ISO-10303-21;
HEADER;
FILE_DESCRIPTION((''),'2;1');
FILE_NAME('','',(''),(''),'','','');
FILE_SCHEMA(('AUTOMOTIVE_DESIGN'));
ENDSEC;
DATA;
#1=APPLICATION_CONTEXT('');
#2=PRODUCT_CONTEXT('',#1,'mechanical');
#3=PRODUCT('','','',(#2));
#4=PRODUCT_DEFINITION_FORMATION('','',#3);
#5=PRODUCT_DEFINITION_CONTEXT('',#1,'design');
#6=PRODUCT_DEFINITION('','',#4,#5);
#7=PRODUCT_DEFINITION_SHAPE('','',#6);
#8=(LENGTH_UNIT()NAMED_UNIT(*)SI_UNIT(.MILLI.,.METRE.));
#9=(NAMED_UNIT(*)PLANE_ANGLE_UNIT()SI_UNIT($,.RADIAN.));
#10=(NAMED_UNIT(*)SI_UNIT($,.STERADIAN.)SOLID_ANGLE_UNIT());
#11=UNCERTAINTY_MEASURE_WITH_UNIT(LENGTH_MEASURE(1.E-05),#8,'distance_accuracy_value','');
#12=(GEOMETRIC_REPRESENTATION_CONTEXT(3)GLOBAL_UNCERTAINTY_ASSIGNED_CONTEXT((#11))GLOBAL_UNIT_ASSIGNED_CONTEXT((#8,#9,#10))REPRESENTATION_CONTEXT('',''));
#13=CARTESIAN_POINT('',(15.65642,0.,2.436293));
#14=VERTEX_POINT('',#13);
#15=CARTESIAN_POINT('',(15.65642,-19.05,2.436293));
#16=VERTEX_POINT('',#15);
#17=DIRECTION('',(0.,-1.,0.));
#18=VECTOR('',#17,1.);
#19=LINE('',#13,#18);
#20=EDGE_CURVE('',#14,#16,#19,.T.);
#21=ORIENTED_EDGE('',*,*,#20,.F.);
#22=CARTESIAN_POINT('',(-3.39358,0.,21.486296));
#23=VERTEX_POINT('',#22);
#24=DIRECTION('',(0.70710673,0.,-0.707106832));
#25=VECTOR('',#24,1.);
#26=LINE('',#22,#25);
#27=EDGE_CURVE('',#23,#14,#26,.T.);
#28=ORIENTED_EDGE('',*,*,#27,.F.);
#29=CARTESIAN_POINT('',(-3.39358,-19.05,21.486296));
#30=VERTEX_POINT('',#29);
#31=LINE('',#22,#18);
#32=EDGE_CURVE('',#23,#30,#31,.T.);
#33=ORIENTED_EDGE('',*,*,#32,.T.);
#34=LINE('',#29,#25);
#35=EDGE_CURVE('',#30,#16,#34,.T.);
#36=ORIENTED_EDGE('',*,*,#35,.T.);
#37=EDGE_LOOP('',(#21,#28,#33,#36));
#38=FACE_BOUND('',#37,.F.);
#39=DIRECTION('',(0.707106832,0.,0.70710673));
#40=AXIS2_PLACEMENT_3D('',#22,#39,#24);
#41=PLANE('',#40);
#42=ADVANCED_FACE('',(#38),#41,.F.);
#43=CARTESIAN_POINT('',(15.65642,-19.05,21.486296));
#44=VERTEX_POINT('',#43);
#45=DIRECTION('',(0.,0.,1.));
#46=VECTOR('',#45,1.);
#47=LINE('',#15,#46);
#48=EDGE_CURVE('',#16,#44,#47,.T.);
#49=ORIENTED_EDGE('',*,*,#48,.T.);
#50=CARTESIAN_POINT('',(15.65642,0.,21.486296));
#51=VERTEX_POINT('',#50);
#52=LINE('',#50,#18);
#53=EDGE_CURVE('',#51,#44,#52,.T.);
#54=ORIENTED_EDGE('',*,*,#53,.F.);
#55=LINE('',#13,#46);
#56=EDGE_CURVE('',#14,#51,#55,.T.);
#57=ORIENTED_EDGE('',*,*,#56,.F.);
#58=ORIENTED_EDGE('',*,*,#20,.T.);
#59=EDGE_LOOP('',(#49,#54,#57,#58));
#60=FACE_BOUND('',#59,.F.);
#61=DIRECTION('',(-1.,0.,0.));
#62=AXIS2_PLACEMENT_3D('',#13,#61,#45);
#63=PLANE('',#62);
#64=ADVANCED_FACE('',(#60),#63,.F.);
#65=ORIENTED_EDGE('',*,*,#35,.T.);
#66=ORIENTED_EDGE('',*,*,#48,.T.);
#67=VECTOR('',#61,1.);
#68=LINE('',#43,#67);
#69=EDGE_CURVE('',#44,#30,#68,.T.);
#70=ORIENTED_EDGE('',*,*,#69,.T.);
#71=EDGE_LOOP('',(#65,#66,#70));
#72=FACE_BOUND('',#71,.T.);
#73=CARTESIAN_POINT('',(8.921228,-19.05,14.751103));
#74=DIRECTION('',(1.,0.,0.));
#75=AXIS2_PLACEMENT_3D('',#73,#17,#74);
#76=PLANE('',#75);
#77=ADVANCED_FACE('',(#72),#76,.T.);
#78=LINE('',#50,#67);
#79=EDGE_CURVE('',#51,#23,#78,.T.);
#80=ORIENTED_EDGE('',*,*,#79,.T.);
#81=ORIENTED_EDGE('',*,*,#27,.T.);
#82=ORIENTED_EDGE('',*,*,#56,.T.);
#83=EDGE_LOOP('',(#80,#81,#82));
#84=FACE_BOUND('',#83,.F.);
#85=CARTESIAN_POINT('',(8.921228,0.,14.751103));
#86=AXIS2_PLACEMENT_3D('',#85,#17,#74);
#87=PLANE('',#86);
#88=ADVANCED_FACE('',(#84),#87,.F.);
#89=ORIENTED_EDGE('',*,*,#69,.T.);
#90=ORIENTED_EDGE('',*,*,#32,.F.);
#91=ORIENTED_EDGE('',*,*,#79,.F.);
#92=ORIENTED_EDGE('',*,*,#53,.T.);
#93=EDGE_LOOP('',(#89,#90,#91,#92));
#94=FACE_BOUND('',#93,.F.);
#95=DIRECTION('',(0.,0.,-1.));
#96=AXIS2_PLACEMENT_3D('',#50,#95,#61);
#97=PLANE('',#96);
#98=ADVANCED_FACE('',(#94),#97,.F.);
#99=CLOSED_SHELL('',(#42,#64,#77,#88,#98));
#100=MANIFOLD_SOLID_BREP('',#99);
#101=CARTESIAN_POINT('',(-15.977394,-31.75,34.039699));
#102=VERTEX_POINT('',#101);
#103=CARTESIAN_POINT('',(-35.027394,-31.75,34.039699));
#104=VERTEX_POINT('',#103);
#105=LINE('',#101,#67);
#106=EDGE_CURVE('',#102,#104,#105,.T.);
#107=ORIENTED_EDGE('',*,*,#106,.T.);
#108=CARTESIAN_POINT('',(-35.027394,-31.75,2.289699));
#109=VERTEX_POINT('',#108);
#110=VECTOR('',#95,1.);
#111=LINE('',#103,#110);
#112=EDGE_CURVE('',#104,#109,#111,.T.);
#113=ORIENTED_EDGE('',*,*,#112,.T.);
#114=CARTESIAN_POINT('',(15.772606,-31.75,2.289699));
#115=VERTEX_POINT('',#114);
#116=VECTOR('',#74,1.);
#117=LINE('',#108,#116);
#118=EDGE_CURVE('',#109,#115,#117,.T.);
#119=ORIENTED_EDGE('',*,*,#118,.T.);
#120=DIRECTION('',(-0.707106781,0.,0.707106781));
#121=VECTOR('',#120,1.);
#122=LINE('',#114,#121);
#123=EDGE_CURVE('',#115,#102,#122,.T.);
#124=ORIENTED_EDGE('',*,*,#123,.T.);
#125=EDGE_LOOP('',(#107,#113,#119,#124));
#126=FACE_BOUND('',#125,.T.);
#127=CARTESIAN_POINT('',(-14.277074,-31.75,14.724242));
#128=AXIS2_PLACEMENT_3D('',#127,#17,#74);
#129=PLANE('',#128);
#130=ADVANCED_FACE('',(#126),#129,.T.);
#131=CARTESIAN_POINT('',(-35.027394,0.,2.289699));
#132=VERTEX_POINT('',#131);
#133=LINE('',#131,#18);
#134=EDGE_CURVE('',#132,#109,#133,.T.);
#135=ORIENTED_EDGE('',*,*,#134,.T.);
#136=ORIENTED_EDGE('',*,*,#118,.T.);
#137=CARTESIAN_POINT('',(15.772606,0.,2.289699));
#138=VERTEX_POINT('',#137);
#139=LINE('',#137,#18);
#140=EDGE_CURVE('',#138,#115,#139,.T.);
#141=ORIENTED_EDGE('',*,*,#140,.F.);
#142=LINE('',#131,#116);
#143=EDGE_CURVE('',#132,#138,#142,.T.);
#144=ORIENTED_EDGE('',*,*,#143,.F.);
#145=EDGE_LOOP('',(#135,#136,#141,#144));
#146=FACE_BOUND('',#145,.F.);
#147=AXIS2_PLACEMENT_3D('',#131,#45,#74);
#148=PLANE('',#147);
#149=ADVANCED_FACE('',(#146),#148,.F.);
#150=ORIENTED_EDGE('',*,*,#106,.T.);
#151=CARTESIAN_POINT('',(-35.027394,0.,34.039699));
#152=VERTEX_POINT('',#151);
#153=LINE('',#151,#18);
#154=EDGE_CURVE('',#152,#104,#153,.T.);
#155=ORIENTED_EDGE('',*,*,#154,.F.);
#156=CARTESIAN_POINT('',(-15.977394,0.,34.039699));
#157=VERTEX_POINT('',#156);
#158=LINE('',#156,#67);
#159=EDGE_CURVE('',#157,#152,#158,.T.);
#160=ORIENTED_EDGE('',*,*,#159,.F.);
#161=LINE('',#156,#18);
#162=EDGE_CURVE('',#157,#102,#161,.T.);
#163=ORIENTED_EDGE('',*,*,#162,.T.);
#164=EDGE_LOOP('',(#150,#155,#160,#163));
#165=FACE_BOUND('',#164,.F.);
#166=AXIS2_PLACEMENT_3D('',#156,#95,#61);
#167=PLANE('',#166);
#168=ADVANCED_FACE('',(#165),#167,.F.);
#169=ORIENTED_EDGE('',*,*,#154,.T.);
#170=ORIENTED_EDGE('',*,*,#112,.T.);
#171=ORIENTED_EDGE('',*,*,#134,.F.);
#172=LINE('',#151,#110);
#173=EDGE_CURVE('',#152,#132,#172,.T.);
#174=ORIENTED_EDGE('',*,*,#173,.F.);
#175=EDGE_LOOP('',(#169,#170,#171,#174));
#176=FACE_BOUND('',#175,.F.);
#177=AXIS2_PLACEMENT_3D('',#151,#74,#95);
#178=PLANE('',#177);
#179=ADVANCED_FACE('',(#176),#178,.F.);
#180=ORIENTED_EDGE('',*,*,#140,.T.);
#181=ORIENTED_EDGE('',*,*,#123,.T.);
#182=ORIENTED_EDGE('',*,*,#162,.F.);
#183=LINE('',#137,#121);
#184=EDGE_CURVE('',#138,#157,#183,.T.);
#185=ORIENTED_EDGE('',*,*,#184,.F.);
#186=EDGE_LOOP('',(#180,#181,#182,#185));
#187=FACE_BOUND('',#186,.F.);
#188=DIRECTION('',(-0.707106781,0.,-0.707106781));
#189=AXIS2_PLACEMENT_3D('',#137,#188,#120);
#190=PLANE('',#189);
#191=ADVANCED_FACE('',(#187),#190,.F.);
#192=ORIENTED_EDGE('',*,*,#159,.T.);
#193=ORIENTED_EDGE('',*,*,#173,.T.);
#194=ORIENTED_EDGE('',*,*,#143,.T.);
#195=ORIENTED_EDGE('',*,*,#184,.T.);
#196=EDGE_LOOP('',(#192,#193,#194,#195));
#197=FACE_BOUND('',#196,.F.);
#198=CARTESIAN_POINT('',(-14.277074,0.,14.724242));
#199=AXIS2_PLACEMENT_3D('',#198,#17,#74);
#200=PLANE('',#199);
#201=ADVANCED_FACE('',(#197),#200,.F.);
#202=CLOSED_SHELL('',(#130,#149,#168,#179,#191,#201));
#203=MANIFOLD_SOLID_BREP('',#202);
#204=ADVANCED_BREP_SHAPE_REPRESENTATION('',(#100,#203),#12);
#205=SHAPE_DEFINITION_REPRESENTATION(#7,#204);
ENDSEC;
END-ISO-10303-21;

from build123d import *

# Parameters (mm, degrees)
F1_DEPTH = 31.75
F3_DEPTH = 19.05


# Not quite as in the source:
# - a length typed as a fraction of an inch, garbled in the dataset ("3 / 203.2 mm" for 3/8 in), is restored


with BuildPart() as f1:
    # F0 (on Front) → F1 (new body)
    with BuildSketch(Plane.XZ):
        Polygon((-15.9773944168, 34.0396987623), (-35.0273944168, 34.0396987623), (-35.0273944168, 2.2896987623), (15.7726055832, 2.2896987623), align=None)
    extrude(amount=F1_DEPTH)


with BuildPart() as f3:
    # F2 (on Front) → F3 (new body)
    with BuildSketch(Plane.XZ):
        Polygon((-3.3935803209, 21.4862959499), (15.6564196791, 2.436293192), (15.6564196791, 21.4862959499), align=None)
    extrude(amount=F3_DEPTH)


solid = Compound([f1.part, f3.part])
